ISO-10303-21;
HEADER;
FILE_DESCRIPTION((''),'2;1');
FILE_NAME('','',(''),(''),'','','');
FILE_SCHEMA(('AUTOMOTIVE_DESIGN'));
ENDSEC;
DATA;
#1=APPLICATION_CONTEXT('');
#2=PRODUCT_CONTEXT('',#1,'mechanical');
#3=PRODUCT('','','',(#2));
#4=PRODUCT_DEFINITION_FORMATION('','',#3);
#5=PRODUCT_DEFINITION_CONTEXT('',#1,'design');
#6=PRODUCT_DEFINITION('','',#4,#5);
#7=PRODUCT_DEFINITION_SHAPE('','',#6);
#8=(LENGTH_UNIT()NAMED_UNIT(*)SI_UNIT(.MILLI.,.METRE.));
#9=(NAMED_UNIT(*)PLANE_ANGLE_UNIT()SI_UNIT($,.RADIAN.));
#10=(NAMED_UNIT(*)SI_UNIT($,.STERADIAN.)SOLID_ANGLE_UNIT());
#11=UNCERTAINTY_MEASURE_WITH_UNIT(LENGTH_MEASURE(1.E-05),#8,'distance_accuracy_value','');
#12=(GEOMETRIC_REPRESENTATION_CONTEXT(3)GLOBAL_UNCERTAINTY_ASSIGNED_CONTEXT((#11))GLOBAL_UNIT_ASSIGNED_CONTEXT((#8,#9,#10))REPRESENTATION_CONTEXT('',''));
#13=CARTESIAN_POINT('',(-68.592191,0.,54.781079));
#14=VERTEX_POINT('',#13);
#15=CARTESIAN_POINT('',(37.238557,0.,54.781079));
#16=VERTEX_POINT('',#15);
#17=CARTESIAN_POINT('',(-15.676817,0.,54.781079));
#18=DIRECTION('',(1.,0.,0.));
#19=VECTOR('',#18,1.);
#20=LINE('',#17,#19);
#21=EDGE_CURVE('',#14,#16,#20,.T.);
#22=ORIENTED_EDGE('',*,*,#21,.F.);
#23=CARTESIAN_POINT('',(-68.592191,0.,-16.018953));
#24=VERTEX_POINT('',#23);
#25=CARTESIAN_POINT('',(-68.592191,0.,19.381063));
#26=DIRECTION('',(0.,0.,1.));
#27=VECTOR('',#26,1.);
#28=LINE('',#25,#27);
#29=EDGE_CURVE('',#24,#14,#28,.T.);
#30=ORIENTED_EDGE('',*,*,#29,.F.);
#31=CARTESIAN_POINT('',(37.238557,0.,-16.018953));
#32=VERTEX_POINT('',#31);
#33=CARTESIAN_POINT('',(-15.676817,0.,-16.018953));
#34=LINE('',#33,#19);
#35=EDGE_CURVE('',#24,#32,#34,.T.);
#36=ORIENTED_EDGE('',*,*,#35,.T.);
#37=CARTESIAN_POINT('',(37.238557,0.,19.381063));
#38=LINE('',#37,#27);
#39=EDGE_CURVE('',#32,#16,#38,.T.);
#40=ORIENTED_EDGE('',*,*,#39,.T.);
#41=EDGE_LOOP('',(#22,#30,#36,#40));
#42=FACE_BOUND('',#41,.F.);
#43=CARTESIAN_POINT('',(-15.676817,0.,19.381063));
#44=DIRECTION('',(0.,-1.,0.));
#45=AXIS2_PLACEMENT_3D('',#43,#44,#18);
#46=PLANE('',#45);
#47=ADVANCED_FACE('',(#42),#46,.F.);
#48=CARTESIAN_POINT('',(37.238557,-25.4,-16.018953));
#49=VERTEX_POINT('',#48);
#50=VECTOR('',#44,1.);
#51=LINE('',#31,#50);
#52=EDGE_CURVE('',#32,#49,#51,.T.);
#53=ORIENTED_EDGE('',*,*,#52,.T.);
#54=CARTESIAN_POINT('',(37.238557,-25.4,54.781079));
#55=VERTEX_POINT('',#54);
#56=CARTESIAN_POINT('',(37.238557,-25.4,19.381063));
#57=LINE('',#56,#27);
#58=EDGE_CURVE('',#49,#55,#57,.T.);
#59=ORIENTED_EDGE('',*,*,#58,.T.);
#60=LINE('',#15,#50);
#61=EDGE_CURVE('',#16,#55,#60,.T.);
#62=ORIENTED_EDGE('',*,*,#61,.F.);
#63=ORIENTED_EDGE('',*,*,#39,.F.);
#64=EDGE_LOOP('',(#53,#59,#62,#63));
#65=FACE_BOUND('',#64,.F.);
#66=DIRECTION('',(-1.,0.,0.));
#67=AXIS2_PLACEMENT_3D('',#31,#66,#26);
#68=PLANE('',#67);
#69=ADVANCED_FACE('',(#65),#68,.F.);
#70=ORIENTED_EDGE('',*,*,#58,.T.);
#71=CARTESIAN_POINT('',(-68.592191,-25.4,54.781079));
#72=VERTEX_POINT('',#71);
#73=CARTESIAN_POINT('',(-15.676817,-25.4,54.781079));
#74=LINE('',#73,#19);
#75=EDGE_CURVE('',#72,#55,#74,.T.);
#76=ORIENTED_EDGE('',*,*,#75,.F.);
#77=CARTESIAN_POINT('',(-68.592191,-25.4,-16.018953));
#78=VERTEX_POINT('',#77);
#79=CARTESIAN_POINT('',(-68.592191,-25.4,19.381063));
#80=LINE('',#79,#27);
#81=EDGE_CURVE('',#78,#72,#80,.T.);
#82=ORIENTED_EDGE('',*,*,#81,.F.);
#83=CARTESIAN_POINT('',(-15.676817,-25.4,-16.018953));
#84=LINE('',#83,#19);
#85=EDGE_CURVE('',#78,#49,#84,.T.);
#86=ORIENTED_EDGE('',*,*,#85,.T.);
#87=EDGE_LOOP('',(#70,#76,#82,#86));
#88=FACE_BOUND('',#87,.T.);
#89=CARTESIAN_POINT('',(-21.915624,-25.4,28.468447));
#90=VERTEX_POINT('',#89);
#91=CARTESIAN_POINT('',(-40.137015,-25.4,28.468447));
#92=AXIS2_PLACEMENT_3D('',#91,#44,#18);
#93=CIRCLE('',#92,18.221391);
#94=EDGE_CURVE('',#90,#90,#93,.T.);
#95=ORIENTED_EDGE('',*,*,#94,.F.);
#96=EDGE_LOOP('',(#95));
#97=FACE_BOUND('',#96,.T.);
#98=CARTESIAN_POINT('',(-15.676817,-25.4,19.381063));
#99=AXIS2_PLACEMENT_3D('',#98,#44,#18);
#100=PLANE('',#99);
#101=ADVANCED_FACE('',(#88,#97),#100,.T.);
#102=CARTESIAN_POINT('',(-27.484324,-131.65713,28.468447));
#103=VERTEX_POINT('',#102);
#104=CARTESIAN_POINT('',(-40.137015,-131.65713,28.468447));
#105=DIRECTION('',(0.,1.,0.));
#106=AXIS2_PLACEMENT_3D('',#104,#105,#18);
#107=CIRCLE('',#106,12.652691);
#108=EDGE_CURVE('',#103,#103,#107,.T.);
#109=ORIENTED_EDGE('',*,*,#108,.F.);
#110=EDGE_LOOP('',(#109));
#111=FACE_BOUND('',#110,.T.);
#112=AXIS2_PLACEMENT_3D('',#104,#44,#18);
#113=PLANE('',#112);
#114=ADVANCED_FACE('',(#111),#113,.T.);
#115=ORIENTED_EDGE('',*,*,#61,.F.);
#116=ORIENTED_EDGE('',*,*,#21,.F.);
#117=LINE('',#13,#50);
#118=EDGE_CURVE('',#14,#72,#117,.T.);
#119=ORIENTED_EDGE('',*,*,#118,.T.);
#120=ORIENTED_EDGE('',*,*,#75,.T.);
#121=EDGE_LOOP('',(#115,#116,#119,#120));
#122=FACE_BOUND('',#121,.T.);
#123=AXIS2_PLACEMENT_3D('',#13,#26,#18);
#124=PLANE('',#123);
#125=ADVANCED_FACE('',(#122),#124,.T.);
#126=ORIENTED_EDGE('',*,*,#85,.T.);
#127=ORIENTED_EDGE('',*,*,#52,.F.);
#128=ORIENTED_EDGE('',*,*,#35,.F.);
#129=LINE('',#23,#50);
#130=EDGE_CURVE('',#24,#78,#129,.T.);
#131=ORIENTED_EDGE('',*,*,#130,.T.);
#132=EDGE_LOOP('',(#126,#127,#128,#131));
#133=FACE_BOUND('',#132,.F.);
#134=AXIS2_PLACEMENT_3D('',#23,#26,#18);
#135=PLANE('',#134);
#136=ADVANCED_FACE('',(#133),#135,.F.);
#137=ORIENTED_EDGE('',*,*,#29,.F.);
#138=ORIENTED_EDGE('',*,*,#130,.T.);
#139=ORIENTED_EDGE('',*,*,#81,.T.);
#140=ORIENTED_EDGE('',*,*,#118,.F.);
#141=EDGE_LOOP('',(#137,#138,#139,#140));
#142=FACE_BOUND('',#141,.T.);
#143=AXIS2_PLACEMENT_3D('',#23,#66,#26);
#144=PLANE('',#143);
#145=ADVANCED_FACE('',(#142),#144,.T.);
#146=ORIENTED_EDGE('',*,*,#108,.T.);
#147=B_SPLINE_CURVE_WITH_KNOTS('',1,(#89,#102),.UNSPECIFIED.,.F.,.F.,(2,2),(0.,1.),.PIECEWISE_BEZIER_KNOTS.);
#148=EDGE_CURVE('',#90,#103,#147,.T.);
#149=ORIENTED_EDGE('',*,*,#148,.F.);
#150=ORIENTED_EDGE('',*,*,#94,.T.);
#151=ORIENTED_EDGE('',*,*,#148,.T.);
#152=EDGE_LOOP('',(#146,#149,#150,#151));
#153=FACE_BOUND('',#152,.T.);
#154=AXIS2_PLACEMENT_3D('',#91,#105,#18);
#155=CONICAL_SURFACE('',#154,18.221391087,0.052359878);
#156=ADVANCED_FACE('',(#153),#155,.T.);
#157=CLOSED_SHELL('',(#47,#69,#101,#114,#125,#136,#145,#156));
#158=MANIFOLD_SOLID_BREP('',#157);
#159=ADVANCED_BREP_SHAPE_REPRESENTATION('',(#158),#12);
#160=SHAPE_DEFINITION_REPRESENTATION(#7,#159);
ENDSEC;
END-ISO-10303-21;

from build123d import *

# Parameters (mm, degrees)
F0_W     = 105.8307476342
F0_H     = 70.8000324667
F1_DEPTH = 25.4
F2_R     = 18.2213910868
F3_DEPTH = 106.25713
F3_TAPER = 3


# Not quite as in the source:
# - the program builds the solid bodies; features that only make, move or delete a surface that nothing else refers to are left out


with BuildPart() as f1:
    # F0 (on Front) → F1 (new body)
    with BuildSketch(Plane.XZ):
        with Locations((-15.6768169254, 19.381063059)):
            Rectangle(F0_W, F0_H)
    extrude(amount=F1_DEPTH)

    # F2 (on face) → F3 (join)
    with BuildSketch(Plane.XZ.offset(25.4)):
        with Locations((-40.1370152831, 28.4684468061)):
            Circle(F2_R)
    extrude(amount=F3_DEPTH, taper=F3_TAPER)


solid = f1.part
